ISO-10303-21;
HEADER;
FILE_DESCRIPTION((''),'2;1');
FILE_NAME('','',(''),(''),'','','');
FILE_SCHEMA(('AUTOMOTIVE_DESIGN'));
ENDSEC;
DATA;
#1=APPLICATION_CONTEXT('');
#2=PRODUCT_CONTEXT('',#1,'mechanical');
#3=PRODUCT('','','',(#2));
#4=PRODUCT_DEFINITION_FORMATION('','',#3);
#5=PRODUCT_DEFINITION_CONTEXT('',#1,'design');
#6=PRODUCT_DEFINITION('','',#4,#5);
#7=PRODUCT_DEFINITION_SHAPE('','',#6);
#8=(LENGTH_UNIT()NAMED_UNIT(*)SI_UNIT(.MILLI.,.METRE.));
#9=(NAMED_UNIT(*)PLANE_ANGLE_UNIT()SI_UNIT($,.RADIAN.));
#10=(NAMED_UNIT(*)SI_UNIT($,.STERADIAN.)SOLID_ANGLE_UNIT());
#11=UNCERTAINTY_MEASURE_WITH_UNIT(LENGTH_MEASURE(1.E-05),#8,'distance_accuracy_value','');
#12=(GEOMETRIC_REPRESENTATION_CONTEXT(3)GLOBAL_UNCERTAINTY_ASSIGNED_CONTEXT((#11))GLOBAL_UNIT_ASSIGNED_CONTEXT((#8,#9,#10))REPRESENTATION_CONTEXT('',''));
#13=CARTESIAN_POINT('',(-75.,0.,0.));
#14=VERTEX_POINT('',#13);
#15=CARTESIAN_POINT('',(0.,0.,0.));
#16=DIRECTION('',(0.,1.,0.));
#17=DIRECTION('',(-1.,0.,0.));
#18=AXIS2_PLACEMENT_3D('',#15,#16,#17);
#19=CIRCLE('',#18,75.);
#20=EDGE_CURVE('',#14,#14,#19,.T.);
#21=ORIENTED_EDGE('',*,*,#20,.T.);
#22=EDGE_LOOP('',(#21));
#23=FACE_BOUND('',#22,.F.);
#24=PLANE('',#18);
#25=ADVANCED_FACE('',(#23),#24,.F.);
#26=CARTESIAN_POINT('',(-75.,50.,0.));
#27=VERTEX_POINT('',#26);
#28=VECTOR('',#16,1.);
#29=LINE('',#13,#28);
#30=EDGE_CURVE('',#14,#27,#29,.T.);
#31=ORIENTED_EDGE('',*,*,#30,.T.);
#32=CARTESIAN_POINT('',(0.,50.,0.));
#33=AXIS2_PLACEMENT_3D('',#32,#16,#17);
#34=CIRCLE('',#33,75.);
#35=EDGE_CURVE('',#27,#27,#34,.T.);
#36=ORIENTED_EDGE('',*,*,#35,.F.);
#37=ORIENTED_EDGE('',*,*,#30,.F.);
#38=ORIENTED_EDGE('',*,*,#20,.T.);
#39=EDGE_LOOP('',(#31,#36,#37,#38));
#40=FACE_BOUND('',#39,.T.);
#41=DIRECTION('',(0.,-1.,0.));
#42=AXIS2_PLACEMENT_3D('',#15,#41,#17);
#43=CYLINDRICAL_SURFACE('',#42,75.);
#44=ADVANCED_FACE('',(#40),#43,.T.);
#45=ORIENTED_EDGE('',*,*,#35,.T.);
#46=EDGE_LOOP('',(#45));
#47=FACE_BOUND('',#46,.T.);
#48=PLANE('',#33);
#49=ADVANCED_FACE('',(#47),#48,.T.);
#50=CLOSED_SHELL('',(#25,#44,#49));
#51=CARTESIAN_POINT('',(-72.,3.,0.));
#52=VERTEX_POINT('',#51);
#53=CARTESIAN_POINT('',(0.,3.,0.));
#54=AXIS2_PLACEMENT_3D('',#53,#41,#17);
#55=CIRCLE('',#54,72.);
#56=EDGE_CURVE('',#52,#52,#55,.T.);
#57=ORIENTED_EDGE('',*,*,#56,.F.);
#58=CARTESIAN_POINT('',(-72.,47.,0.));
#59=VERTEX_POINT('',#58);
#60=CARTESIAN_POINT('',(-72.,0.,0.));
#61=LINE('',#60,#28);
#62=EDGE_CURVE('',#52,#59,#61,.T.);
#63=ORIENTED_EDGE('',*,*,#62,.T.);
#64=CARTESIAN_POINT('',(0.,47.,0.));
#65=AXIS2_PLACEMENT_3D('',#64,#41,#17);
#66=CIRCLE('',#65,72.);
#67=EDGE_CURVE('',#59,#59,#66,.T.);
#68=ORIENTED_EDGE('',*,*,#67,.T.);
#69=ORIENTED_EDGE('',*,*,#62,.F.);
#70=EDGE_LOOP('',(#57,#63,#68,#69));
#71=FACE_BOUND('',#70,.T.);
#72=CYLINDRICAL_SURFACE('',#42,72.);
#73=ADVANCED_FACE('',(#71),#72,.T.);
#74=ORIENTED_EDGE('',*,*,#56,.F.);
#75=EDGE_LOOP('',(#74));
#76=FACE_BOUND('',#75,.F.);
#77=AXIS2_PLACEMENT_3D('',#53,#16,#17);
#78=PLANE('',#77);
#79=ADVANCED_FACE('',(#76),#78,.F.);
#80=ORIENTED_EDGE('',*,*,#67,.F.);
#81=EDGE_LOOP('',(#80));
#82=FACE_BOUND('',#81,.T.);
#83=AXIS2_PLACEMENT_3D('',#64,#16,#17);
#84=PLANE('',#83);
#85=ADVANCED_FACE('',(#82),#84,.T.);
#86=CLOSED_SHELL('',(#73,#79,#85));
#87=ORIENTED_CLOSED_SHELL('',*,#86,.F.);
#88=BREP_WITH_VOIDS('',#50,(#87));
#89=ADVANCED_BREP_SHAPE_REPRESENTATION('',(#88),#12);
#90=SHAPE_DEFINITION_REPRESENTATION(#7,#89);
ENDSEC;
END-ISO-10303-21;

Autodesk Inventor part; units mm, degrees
ref_plane "YZ Plane" through (0, 0, 0) normal (1, 0, 0) x (0, 1, 0)
ref_plane "XZ Plane" through (0, 0, 0) normal (0, 1, 0) x (-1, 0, 0)
ref_plane "XY Plane" through (0, 0, 0) normal (0, 0, 1) x (1, 0, 0)
sketch "Sketch1" plane through (0, 0, 0) normal (0, 1, 0) x (-1, 0, 0)
  circle A0 centre (0, 0) radius 75
  dimension "d0" = 150
extrude "Extrusion1" add sketch "Sketch1" along normal blind 50
shell "Shell1" thickness 3 removed faces 0
properties part number "Tank" material "PET Plastic"
